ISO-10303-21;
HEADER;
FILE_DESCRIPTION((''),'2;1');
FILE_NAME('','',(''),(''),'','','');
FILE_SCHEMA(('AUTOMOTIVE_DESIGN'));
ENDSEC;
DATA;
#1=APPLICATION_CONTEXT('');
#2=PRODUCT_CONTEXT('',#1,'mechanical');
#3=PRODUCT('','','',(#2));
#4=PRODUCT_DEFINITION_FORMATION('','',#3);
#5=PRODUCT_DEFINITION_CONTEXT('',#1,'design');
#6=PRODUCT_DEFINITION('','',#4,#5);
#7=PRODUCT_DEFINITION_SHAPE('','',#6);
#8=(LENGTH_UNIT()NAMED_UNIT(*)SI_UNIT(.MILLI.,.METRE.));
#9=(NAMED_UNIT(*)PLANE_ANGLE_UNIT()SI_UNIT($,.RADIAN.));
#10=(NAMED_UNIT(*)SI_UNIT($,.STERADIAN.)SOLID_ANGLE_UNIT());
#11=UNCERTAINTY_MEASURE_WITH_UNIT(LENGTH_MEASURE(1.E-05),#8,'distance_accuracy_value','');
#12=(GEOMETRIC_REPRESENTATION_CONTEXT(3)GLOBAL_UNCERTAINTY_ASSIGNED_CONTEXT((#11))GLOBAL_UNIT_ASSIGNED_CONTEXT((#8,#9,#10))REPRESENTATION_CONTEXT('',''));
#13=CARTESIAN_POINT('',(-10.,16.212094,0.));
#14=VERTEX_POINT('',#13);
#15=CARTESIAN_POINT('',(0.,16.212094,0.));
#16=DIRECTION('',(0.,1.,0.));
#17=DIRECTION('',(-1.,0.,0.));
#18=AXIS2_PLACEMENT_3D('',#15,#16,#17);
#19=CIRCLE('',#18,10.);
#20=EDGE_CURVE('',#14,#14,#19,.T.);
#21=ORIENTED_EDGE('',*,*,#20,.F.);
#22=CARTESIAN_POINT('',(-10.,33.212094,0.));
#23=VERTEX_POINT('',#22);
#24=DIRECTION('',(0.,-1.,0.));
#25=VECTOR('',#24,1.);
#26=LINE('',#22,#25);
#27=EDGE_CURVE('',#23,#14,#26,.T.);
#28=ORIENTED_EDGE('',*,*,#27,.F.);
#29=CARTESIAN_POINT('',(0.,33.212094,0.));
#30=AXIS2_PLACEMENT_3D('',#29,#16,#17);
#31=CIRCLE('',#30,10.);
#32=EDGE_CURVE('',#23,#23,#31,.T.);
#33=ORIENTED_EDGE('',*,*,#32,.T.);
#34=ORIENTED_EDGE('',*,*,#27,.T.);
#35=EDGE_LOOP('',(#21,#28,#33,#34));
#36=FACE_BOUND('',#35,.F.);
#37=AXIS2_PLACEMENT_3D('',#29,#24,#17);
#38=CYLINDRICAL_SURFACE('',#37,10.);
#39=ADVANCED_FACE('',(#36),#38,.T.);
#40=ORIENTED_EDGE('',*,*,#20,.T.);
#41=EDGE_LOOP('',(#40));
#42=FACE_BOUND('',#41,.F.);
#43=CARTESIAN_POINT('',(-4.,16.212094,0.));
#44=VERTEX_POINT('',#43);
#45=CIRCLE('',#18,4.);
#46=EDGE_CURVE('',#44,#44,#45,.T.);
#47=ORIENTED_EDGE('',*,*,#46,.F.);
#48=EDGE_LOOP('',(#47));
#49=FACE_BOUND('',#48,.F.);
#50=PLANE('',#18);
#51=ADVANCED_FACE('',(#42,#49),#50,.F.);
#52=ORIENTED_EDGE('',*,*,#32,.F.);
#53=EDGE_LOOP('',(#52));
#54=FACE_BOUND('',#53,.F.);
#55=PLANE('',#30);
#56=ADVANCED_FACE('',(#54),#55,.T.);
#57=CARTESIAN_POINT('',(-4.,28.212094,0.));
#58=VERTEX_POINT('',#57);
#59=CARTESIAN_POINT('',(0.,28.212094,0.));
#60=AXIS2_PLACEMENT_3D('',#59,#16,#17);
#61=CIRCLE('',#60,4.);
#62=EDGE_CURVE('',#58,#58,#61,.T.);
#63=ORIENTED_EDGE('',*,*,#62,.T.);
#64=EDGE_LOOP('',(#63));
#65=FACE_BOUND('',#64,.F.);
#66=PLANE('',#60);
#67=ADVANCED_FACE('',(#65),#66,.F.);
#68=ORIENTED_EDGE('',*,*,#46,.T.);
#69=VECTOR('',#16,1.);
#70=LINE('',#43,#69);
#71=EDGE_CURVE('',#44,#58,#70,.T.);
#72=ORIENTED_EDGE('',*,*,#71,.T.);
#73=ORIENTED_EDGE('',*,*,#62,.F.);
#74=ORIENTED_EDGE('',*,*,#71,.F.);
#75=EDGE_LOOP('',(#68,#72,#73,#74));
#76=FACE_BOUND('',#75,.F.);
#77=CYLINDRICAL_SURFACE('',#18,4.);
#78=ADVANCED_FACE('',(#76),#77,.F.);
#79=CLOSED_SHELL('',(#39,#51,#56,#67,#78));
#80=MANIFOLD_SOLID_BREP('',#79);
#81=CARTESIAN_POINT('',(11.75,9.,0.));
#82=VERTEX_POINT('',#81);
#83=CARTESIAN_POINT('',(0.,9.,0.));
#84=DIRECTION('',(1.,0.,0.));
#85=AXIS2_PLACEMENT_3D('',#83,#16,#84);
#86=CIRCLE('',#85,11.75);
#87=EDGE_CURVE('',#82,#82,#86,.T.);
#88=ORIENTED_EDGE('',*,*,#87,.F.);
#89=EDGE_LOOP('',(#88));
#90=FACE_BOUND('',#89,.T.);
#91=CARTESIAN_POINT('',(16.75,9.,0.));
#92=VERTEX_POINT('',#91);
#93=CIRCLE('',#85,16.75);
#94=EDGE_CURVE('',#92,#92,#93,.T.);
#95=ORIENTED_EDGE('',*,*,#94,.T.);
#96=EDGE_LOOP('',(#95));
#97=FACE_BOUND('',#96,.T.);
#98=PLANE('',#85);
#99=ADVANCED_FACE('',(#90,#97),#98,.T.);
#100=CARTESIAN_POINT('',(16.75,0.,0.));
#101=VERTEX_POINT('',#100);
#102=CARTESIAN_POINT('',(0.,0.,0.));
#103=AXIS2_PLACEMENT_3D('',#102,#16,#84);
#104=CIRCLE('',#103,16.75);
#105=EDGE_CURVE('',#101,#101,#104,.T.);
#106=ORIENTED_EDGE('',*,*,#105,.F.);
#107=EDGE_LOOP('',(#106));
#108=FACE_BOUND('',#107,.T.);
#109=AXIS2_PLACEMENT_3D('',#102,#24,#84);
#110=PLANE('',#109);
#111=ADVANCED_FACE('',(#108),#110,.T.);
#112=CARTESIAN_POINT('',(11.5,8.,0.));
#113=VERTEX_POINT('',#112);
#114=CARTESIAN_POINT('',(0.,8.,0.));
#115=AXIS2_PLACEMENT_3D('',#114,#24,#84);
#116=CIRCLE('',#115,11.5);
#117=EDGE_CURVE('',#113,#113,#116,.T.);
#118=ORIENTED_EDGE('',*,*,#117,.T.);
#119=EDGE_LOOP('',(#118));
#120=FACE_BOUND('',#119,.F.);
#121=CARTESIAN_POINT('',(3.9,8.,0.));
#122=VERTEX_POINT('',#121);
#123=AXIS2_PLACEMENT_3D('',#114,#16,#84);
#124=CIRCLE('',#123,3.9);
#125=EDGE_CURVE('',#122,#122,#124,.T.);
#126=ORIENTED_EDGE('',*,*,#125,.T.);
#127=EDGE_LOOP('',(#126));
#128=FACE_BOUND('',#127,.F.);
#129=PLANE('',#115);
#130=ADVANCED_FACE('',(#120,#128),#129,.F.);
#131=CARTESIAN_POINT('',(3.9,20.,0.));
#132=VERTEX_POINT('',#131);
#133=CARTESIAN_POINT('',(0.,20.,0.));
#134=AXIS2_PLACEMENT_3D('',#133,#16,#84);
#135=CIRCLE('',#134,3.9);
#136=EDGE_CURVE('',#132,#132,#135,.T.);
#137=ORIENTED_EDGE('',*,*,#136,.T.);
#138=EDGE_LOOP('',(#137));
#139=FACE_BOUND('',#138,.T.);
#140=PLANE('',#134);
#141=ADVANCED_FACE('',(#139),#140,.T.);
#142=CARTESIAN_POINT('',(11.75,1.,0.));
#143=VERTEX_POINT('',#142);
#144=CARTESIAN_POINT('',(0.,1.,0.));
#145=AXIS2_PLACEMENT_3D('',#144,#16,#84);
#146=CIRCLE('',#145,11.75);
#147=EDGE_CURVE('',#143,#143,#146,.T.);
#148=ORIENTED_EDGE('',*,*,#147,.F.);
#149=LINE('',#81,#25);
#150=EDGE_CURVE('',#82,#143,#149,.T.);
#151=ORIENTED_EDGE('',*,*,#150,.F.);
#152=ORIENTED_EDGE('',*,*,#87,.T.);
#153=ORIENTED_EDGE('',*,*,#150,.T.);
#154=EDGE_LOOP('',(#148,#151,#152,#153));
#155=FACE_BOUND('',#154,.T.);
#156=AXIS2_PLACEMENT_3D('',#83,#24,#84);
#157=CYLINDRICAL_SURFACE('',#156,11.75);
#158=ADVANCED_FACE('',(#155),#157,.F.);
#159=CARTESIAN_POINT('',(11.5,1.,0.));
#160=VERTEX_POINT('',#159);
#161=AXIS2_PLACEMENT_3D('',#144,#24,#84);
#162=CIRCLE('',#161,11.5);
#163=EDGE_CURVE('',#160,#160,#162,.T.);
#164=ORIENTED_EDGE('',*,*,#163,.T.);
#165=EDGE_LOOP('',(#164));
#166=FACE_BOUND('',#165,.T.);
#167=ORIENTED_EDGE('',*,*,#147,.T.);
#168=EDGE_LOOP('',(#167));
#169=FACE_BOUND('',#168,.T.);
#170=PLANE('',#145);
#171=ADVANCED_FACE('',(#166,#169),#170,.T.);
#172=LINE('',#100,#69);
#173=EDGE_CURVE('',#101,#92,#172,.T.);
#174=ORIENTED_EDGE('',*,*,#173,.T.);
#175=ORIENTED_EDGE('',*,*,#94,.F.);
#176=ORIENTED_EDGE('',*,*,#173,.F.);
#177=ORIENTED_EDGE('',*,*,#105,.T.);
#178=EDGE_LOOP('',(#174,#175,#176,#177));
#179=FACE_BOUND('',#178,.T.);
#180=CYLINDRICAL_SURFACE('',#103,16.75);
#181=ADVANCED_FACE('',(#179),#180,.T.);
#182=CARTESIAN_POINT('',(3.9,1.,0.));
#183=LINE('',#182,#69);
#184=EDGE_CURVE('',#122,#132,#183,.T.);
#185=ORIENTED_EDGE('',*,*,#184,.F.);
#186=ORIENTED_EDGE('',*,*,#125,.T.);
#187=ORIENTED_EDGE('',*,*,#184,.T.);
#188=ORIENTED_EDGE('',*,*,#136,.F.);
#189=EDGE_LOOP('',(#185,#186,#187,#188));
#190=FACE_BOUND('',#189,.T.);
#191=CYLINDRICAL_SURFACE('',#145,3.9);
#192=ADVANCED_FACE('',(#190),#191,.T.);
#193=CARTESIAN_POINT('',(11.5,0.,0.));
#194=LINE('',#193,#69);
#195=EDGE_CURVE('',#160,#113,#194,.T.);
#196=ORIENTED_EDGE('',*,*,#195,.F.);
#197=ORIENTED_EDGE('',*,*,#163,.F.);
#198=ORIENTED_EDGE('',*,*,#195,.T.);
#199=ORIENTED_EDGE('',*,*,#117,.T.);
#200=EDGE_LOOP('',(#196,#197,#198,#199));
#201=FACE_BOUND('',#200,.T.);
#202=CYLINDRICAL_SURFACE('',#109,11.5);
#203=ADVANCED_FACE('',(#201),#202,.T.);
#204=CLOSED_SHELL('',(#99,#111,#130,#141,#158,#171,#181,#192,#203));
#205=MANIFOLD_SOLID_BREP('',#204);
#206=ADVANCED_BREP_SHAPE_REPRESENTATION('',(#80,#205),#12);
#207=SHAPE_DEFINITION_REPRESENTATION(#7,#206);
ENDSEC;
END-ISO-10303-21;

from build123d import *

# Parameters (mm, degrees)
F4_R     = 11.5
F5_DEPTH = 8


# Not quite as in the source:
# - a feature names something its author has since deleted; it is built from what else it names


with BuildPart() as f1:
    # F0 (on Top) → F1 (revolve)
    with BuildSketch(Plane.XY):
        Polygon((0, 20), (0, 0), (16.75, 0), (16.75, 9), (11.75, 9), (11.75, 1), (3.9, 1), (3.9, 20), align=None)
    revolve(axis=Axis((0, 10, 0), (0, 1, 0)))

    # F4 (on Front) → F5 (join)
    with BuildSketch(Plane.XZ):
        Circle(F4_R)
    extrude(amount=-F5_DEPTH)


with BuildPart() as f3:
    # F2 (on Top) → F3 (revolve)
    with BuildSketch(Plane.XY):
        Polygon((-10, 16.2120937904), (-4, 16.2120937904), (-4, 28.2120937904), (0, 28.2120937904), (0, 33.2120937904), (-10, 33.2120937904), align=None)
    revolve(axis=Axis((0, 30.7120937904, 0), (0, 1, 0)))


solid = Compound([f1.part, f3.part])
